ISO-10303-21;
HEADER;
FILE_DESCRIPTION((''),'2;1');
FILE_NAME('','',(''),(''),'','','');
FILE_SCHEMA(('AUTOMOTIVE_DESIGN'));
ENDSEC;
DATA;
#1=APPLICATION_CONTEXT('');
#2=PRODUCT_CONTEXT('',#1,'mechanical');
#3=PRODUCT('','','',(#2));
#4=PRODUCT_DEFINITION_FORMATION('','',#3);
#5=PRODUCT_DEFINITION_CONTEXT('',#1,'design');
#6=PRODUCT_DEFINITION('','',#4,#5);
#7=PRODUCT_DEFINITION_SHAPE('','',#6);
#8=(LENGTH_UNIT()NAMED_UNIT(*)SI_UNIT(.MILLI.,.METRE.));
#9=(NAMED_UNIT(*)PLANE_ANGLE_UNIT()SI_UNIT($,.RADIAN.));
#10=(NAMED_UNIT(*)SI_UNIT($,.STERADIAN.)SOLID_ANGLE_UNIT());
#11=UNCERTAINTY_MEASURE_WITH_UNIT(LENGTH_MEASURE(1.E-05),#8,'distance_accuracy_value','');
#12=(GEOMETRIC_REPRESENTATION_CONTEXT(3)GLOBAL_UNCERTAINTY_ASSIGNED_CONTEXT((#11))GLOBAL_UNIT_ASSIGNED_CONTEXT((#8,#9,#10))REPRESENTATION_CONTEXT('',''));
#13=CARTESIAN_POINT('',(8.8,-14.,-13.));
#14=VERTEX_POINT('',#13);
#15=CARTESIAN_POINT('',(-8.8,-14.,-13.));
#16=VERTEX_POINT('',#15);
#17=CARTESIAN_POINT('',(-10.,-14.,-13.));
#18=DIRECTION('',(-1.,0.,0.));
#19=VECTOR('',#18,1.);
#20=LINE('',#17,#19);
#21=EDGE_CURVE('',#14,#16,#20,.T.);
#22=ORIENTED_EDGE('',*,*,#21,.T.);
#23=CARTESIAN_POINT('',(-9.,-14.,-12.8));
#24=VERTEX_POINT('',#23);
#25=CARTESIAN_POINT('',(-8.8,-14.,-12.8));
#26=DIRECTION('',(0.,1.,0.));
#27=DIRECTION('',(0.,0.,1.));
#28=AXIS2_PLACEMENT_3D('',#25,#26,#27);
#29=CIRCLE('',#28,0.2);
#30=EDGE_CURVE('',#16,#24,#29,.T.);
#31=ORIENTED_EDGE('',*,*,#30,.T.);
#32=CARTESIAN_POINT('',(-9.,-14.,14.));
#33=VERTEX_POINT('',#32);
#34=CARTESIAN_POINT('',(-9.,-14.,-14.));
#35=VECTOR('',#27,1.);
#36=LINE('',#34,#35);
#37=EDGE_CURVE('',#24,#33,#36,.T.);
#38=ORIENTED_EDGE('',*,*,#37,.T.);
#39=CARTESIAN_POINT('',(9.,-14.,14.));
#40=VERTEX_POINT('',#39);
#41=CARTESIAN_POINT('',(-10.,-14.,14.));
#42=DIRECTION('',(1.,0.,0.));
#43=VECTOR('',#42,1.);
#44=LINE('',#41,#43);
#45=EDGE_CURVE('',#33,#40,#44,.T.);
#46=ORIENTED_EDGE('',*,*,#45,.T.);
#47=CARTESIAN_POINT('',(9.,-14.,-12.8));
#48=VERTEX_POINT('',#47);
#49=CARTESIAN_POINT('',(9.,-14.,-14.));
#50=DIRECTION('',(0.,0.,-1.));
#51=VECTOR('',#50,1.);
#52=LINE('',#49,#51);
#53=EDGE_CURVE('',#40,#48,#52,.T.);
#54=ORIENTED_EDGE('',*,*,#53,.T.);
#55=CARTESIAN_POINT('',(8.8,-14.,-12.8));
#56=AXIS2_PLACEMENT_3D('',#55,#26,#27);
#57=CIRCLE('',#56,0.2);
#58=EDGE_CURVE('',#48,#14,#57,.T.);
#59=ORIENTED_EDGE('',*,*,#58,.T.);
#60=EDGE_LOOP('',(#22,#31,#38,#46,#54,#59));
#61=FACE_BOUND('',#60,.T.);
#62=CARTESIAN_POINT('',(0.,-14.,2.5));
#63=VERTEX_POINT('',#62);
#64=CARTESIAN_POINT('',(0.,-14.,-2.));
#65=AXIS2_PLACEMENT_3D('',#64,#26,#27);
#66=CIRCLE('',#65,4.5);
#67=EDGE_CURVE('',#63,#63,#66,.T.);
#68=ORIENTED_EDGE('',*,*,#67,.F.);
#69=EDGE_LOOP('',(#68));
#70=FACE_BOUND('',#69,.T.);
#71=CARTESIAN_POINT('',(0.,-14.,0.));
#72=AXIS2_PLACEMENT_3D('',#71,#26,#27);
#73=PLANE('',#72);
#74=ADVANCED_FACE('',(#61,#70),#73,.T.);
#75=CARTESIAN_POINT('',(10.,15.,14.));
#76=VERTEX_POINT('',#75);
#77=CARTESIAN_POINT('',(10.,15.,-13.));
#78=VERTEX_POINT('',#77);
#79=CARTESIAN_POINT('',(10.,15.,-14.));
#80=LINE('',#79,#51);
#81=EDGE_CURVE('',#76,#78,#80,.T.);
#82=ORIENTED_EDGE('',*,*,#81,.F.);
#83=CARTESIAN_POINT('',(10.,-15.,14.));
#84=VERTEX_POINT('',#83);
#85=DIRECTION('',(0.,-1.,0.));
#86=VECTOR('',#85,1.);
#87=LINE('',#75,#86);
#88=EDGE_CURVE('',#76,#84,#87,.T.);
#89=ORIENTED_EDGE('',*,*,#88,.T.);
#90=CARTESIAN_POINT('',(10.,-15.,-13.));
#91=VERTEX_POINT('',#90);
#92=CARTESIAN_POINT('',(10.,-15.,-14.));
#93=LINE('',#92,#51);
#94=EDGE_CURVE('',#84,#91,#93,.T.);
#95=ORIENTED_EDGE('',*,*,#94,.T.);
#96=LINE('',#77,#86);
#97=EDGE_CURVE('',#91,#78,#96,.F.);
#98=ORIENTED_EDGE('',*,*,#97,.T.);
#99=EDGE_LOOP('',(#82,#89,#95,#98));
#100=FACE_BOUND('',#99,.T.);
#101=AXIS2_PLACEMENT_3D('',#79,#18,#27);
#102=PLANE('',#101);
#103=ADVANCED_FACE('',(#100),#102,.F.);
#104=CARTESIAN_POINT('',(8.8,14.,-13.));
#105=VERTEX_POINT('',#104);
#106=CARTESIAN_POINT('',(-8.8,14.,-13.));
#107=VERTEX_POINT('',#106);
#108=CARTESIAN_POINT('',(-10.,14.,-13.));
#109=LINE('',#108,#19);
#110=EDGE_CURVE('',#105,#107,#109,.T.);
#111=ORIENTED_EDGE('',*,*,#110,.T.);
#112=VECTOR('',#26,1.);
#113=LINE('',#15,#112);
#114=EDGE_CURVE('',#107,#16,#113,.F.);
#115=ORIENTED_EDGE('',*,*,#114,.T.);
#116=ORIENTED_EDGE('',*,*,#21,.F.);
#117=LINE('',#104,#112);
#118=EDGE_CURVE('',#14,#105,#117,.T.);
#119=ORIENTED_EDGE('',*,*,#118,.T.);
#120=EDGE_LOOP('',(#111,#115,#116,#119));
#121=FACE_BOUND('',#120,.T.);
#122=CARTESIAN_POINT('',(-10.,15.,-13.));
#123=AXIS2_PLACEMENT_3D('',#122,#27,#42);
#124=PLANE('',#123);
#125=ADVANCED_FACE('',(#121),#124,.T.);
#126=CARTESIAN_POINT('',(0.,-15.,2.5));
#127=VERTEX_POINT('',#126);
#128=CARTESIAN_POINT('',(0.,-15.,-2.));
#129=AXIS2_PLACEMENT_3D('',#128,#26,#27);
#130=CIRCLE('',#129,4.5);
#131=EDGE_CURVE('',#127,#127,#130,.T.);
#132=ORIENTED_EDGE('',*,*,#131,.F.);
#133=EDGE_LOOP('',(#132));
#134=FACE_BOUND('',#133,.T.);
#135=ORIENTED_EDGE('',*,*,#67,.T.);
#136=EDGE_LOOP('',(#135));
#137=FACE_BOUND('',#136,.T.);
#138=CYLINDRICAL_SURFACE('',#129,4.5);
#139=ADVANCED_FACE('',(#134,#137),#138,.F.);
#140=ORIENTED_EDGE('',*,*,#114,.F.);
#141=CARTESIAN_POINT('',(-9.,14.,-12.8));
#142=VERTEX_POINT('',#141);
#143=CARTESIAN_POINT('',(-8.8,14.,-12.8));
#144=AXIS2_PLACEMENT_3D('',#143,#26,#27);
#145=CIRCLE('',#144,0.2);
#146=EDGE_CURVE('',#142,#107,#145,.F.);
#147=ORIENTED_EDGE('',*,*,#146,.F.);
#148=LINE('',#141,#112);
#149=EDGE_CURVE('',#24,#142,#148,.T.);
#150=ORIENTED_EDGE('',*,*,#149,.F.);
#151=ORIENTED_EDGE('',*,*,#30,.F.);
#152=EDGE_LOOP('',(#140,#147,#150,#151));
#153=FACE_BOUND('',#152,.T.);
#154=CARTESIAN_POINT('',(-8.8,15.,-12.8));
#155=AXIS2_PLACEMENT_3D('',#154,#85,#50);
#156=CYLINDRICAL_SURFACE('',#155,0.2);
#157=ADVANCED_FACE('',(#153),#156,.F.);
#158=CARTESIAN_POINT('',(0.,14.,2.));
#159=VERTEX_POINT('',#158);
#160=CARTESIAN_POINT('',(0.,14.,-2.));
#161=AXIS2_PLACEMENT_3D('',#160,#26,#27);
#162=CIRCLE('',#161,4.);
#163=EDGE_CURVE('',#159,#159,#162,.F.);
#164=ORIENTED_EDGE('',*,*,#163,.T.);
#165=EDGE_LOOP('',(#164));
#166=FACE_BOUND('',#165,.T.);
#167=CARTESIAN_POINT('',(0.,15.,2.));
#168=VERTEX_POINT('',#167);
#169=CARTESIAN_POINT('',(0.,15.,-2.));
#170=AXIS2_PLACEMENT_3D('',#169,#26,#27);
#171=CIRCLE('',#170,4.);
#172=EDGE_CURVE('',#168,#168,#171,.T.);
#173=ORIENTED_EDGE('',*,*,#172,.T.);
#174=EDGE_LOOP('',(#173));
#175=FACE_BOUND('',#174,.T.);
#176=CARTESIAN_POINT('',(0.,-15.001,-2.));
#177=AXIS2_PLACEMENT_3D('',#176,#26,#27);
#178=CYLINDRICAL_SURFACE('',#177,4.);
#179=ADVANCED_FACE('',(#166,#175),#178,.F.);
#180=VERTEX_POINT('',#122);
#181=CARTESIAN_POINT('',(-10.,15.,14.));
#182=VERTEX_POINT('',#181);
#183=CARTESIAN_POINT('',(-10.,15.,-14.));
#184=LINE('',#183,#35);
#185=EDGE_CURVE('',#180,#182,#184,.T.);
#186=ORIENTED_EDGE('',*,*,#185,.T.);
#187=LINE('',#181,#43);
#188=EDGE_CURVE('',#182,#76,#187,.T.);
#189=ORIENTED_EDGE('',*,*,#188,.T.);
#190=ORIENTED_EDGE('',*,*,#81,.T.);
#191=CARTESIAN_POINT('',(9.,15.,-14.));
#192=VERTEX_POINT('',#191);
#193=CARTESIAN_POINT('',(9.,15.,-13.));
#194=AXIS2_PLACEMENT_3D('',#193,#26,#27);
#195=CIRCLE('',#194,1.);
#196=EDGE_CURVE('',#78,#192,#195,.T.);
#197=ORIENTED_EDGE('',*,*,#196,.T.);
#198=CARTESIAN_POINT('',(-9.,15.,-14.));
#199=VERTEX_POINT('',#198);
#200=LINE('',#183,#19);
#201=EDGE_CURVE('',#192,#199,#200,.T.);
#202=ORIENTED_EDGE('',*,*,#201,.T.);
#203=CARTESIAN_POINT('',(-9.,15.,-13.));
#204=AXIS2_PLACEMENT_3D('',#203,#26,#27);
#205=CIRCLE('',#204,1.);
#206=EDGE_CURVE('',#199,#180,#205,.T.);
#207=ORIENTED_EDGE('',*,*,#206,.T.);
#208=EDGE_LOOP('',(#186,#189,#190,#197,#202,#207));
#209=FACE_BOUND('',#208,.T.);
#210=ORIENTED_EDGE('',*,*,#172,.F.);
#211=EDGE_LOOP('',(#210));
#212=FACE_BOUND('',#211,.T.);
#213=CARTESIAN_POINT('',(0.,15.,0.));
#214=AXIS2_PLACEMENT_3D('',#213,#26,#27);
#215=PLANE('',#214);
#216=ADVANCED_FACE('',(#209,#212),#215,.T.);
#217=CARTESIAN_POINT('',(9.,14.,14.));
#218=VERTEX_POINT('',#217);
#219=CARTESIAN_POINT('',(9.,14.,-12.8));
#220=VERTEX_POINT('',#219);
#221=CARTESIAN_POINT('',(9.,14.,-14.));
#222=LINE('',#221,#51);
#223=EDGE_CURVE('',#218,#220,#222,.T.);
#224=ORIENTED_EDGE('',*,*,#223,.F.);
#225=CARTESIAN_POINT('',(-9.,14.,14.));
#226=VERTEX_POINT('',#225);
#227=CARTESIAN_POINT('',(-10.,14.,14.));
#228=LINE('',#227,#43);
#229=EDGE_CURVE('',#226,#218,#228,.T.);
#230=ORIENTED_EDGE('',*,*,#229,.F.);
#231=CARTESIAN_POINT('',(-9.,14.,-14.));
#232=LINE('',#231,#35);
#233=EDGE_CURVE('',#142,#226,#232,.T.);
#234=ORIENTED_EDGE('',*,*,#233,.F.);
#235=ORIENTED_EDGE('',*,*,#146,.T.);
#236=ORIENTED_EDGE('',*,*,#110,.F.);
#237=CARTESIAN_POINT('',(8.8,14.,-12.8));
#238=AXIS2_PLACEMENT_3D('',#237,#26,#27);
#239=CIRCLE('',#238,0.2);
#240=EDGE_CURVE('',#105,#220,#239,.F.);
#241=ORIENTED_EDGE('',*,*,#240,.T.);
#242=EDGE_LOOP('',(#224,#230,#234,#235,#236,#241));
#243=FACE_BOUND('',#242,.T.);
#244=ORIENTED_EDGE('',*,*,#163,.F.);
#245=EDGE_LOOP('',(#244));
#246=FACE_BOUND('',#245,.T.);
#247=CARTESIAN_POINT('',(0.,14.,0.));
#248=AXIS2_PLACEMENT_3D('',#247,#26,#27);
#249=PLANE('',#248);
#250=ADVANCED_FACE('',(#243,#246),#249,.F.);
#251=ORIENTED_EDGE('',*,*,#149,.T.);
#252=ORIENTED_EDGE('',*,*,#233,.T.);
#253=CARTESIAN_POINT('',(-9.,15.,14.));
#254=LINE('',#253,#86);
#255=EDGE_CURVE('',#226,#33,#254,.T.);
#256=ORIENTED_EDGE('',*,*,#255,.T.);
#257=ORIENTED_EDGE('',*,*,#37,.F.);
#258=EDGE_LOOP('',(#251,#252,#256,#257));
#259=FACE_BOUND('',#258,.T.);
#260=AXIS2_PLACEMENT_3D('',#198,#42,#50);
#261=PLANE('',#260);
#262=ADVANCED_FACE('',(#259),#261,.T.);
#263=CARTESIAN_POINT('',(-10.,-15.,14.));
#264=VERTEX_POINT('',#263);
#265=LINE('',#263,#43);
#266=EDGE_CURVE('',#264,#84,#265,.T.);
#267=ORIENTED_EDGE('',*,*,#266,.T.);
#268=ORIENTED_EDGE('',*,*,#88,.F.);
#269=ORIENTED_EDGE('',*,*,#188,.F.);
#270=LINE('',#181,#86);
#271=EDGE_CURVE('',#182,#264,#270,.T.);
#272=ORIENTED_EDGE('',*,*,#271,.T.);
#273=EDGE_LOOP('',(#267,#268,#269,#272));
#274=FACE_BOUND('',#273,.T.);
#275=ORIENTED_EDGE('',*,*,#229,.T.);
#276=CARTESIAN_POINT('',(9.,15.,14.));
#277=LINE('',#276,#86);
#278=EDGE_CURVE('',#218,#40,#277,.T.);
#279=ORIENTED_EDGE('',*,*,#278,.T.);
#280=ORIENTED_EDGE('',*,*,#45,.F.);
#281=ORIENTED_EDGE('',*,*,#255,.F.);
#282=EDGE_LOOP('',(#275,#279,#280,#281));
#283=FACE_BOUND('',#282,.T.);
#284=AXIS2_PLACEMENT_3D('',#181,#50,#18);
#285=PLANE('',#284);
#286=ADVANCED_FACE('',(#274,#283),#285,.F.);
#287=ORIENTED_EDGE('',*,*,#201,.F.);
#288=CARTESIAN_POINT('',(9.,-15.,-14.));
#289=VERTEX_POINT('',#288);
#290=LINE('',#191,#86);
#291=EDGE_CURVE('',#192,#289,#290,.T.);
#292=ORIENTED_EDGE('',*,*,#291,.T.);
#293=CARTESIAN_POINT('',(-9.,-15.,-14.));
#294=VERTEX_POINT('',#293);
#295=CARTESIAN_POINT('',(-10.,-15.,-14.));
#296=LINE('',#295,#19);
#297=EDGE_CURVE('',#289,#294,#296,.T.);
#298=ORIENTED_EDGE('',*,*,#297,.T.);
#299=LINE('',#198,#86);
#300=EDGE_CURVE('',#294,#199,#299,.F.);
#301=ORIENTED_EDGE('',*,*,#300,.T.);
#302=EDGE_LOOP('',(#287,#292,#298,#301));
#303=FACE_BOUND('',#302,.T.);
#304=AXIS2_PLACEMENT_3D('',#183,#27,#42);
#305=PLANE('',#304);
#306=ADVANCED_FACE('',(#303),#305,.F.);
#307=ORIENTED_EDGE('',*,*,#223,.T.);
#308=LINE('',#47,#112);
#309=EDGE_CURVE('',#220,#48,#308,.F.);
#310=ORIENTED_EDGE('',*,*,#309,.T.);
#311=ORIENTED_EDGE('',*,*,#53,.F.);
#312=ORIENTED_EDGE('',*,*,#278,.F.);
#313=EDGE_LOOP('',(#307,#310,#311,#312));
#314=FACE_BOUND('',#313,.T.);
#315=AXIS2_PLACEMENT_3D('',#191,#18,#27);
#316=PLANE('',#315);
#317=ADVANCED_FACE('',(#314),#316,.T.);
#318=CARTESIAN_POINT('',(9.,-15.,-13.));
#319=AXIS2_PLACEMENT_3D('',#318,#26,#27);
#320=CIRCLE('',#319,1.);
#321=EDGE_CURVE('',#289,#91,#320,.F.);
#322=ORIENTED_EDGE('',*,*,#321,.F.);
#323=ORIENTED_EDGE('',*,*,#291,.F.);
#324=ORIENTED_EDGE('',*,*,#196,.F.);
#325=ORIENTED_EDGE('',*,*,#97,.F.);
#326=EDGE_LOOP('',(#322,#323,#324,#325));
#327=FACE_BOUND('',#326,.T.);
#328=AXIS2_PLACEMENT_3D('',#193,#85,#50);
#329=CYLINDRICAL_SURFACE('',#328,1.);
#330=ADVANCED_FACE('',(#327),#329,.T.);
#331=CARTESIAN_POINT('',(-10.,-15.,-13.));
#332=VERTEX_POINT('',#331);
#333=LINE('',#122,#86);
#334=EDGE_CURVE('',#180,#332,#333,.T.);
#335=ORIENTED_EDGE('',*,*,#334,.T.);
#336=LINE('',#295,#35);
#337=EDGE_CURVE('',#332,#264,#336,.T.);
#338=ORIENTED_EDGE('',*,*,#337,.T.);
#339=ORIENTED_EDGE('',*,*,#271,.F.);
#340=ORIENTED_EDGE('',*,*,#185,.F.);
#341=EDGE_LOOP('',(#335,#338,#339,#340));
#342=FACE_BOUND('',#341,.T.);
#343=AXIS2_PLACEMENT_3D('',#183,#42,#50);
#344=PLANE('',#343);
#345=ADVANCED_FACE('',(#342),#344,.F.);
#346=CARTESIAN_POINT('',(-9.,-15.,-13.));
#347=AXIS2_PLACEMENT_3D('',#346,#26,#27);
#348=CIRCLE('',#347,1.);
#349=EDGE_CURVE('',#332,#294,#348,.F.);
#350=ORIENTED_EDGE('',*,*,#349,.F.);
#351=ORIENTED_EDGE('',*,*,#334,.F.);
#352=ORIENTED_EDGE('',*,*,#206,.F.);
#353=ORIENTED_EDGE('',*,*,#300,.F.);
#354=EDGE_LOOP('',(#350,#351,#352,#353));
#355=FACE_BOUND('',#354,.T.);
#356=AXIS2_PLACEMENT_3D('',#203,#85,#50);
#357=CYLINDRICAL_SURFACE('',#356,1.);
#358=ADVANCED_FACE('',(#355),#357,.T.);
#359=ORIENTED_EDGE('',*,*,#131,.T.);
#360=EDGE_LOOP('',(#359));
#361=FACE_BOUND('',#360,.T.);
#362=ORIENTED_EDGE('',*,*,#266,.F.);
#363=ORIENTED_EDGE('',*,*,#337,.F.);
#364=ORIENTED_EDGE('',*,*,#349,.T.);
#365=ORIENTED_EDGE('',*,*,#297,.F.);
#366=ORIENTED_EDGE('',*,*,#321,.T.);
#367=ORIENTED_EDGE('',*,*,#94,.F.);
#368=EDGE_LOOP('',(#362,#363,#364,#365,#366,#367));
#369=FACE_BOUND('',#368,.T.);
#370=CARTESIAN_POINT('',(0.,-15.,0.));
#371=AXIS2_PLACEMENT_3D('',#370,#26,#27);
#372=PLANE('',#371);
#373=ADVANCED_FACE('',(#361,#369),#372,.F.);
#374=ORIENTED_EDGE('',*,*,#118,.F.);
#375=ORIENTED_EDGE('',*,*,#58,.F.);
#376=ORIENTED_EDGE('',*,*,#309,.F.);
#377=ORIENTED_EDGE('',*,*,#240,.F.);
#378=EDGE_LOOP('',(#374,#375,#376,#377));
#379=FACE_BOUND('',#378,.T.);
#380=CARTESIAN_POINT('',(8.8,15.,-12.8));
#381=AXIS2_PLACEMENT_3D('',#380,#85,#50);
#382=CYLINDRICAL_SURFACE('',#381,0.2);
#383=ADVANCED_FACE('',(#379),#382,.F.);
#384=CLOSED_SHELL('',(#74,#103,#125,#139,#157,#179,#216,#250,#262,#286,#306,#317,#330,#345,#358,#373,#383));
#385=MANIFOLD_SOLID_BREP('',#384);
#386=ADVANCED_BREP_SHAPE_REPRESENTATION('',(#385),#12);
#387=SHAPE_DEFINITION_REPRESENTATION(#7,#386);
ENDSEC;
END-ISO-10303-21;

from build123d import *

# Parameters (mm, degrees)
MAINBODYS_W        = 20
MAINBODYS_H        = 28
MAIN_BODY_DEPTH    = 15
MB_FILLET_R        = 1
SHELL_START        = -9
SHELL_MB_OUTLINE_W = 28
SHELL_MB_OUTLINE_H = 27
SHELL_MB_DEPTH     = 18
TOP_BORE_REACH     = 36.583
TOPBORES_R         = 4
BOTTOMBORES_R      = 4.5
BOTTOM_BORE_DEPTH  = 34.7194306
MB_INNER_FILLET_R  = 0.2


# Read off the part's stored shape, not the designer's step: SHELL MB
with BuildPart() as part:
    # MainBodyS → MAIN BODY (new, symmetric)
    with BuildSketch(Plane(origin=(0, 0, 0), x_dir=(1, 0, 0), z_dir=(0, 1, 0))):
        Rectangle(MAINBODYS_W, MAINBODYS_H)
    extrude(amount=MAIN_BODY_DEPTH, both=True)

    # MB FILLET
    mb_fillet_edges = [part.edges().sort_by_distance(p)[0] for p in [
        (-10, 0, -14),
        (10, 0, -14),
    ]]
    fillet(mb_fillet_edges, radius=MB_FILLET_R)

    # SHELL MB outline → SHELL MB (cut)
    with BuildSketch(Plane.YZ.offset(SHELL_START)):
        with Locations((0, 0.5)):
            Rectangle(SHELL_MB_OUTLINE_W, SHELL_MB_OUTLINE_H)
    extrude(amount=SHELL_MB_DEPTH, mode=Mode.SUBTRACT)

    # TopBoreS → TOP BORE (cut, up to next)
    with BuildSketch(Plane(origin=(0, 15, 0), x_dir=(1, 0, 0), z_dir=(0, 1, 0)), mode=Mode.PRIVATE) as top_bore_sk1:
        with Locations(Location((0, 2, 0), (0, 0, 270))):
            Circle(TOPBORES_R)
    top_bore_tool1 = extrude(top_bore_sk1.sketch, amount=-TOP_BORE_REACH, mode=Mode.PRIVATE) & part.part
    add(top_bore_tool1.solids().sort_by_distance((0, 15, -2))[0], mode=Mode.SUBTRACT)

    # BottomBoreS → BOTTOM BORE (cut, through all)
    with BuildSketch(Plane(origin=(0, -14, 0), x_dir=(1, 0, 0), z_dir=(0, 1, 0))):
        with Locations(Location((0, 2, 0), (0, 0, 270))):
            Circle(BOTTOMBORES_R)
    extrude(amount=-BOTTOM_BORE_DEPTH, mode=Mode.SUBTRACT)

    # MB INNER FILLET
    mb_inner_fillet_edges = [part.edges().sort_by_distance(p)[0] for p in [
        (9, 0, -13),
        (-9, 0, -13),
    ]]
    fillet(mb_inner_fillet_edges, radius=MB_INNER_FILLET_R)


solid = part.part
